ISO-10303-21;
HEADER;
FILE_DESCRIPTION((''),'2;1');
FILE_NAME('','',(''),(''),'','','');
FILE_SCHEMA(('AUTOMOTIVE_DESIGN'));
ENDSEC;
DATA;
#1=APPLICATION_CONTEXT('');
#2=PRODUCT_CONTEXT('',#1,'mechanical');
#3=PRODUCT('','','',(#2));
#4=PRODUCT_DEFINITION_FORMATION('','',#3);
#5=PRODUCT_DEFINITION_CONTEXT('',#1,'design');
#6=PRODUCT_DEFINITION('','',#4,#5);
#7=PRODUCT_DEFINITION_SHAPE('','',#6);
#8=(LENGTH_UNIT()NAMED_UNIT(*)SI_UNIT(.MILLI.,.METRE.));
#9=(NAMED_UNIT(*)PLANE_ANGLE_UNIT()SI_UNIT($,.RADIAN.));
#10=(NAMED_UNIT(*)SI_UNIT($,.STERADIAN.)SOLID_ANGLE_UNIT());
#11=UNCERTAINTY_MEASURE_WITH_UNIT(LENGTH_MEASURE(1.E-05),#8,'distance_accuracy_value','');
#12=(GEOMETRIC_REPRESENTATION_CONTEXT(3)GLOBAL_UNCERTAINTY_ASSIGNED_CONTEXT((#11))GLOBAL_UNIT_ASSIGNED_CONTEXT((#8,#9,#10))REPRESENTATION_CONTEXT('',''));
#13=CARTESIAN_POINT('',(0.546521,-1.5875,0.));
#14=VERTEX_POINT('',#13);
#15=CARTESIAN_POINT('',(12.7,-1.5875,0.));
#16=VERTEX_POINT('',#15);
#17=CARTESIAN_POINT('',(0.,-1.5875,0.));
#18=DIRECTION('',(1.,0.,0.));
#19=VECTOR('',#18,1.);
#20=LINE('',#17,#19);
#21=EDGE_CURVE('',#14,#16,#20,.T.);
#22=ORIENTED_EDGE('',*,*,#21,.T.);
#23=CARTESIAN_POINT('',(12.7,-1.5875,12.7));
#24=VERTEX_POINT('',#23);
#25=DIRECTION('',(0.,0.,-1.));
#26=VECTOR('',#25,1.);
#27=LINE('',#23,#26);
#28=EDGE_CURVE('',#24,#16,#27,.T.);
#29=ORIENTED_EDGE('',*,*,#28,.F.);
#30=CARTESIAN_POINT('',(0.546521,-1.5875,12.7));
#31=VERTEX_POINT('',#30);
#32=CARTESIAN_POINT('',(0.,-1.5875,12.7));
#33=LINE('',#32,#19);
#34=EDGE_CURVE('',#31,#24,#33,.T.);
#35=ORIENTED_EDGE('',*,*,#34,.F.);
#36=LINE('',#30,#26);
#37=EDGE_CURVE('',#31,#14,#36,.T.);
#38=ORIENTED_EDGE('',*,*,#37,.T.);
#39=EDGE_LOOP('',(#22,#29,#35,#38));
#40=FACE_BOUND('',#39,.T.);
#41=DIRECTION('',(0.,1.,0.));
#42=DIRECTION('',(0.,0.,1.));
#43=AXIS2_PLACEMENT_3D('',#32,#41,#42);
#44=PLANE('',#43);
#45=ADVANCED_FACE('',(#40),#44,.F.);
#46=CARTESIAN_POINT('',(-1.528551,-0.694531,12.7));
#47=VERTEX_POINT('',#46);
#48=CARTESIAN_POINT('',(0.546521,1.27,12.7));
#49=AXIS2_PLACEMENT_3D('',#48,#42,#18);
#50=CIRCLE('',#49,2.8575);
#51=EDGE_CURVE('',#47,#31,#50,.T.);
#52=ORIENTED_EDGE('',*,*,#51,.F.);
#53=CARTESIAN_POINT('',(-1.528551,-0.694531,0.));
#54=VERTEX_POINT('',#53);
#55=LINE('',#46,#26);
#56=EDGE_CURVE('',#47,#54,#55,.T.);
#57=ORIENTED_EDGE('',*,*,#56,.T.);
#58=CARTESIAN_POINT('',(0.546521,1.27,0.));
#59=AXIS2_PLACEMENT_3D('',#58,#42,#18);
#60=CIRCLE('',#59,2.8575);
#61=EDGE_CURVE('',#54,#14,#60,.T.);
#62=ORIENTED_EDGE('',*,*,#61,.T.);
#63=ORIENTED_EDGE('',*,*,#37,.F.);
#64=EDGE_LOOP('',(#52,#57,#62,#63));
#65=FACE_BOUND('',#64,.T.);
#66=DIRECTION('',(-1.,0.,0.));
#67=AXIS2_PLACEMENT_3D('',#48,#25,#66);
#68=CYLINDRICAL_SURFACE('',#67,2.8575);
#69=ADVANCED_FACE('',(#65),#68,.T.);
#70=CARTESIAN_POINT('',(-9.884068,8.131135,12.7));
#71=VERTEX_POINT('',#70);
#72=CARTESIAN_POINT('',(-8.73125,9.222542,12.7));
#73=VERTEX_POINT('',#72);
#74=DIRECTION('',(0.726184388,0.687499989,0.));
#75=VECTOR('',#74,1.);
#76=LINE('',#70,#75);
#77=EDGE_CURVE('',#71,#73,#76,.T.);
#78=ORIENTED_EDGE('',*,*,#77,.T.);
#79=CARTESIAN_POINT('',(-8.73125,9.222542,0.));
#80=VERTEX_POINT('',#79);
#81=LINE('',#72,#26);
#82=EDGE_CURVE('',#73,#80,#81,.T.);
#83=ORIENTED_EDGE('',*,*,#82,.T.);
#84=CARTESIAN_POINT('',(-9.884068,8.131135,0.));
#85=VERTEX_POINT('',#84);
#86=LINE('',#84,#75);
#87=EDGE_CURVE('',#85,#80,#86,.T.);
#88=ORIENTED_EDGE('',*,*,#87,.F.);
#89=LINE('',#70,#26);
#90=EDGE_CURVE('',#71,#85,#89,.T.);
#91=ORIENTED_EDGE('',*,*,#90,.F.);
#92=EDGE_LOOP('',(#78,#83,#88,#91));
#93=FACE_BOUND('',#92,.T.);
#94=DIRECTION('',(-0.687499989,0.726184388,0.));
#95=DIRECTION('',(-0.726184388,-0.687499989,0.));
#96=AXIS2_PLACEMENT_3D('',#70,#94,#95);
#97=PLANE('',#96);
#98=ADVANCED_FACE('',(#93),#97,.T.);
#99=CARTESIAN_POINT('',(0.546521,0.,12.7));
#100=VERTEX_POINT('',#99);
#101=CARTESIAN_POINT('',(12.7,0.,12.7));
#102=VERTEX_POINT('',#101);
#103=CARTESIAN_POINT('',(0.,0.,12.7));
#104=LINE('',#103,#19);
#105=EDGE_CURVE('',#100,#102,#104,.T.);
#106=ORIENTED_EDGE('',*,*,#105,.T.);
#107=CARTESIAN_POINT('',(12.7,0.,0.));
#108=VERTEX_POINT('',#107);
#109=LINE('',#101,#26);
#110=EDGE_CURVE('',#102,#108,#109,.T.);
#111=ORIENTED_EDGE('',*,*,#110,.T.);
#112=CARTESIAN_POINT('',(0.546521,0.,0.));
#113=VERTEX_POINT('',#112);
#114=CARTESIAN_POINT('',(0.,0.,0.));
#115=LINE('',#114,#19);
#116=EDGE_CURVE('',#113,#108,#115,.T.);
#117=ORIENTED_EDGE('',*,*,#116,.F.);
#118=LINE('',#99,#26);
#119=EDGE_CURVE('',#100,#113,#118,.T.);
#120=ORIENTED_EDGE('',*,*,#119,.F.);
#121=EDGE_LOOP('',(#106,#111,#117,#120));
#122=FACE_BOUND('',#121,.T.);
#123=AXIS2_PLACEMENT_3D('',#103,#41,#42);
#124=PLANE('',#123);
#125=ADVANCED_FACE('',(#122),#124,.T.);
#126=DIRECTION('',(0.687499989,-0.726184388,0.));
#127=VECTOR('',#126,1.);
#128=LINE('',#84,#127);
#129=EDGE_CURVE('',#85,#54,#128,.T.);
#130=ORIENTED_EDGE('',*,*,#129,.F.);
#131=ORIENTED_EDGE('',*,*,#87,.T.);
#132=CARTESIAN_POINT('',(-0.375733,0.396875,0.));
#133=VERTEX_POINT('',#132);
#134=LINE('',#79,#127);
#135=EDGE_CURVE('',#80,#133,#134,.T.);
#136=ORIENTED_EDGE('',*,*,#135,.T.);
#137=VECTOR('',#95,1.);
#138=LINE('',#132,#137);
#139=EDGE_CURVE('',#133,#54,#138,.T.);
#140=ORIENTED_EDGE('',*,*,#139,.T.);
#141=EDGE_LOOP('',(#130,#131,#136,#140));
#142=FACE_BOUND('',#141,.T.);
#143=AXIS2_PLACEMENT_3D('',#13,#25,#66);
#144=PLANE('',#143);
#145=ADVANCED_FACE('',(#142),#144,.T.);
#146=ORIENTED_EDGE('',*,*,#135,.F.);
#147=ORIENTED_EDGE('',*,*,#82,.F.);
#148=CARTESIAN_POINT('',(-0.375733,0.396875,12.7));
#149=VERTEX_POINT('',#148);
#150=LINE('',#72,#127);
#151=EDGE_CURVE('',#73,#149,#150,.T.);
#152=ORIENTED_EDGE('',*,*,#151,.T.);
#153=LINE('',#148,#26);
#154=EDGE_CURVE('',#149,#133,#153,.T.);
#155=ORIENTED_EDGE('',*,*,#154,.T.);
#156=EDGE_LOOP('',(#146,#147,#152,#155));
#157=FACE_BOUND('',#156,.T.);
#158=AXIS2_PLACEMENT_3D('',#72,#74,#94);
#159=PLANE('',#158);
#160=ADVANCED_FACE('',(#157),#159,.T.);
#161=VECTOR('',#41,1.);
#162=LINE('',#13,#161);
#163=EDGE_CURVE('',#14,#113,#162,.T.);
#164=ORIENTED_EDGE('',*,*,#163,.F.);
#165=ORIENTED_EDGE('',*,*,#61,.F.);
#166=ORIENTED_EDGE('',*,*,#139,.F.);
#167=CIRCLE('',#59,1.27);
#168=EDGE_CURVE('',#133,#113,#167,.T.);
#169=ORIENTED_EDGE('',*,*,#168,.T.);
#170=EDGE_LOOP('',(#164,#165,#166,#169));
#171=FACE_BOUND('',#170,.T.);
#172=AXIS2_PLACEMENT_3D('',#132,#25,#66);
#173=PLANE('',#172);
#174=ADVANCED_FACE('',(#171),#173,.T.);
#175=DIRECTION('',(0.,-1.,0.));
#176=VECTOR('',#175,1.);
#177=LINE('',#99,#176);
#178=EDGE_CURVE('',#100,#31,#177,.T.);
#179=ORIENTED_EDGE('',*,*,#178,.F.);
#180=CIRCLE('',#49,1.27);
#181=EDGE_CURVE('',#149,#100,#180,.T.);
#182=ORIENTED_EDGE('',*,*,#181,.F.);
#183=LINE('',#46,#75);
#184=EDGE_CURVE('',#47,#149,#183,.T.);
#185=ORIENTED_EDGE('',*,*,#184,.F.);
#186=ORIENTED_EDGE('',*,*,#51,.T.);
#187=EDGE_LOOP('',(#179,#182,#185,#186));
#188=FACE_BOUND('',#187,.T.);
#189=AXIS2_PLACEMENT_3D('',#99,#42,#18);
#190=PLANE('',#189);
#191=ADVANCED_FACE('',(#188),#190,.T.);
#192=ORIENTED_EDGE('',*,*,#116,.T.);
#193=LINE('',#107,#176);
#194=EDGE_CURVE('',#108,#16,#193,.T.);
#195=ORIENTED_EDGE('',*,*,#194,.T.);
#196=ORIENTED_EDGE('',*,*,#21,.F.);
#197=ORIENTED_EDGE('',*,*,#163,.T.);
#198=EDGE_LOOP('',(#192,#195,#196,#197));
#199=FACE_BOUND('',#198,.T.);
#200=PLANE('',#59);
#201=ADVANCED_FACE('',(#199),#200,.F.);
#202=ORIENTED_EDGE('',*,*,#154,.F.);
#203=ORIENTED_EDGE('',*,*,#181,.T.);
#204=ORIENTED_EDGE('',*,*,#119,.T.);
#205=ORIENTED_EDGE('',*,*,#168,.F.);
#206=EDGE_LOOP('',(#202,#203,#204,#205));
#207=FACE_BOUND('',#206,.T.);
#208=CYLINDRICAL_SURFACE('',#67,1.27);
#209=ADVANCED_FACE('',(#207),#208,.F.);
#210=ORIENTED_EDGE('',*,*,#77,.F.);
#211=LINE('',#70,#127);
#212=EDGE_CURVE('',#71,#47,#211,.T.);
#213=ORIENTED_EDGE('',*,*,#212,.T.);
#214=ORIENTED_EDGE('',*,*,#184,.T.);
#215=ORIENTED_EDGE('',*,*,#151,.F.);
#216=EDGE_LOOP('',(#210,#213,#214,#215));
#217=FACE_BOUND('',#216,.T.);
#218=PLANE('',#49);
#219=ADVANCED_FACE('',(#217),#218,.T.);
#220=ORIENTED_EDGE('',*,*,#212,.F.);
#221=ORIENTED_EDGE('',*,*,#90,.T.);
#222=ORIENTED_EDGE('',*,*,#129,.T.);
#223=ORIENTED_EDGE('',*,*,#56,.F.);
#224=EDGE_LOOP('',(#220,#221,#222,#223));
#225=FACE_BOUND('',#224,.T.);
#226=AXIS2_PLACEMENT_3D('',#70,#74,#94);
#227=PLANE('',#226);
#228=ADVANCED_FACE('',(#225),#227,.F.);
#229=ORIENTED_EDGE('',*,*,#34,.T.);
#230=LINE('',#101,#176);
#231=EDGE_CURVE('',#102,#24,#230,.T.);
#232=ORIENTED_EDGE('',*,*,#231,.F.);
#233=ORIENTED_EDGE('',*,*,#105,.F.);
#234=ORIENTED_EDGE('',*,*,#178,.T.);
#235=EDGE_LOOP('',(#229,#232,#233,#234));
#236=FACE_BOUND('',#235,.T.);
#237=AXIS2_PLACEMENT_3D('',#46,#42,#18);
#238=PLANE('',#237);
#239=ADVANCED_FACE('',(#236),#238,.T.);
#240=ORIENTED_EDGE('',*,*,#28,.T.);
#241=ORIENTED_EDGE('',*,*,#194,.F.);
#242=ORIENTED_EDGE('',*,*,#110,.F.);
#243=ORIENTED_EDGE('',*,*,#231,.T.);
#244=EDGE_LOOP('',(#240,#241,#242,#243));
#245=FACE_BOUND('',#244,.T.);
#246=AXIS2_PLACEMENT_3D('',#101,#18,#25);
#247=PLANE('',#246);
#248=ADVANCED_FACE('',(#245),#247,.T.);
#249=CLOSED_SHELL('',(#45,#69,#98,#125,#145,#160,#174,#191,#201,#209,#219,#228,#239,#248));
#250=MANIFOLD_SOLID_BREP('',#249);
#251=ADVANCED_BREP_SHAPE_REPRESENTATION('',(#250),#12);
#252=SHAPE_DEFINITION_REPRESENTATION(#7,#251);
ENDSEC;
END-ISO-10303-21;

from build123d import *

# Parameters (mm, degrees)
BASE_FLANGE1_DEPTH = 12.7


# Sheet-metal steps are written as plain solids
with BuildPart() as part:
    # Sketch2 → Base-Flange1 (new body)
    with BuildSketch(Plane.XY):
        with BuildLine():
            Line((-8.731249857, 9.222541728), (-0.375733178, 0.396875014))
            ThreePointArc((-0.375733178, 0.396875014), (0.044509407, 0.103430514), (0.546520995, 0))
            Line((0.546520995, 0), (12.7, 0))
            Line((12.7, 0), (12.7, -1.5875))
            Line((12.7, -1.5875), (0.546520995, -1.5875))
            ThreePointArc((0.546520995, -1.5875), (-0.583005077, -1.354781344), (-1.528550894, -0.694531218))
            Line((-1.528550894, -0.694531218), (-9.884067573, 8.131135496))
            Line((-9.884067573, 8.131135496), (-8.731249857, 9.222541728))
        make_face()
    extrude(amount=BASE_FLANGE1_DEPTH)


solid = part.part
